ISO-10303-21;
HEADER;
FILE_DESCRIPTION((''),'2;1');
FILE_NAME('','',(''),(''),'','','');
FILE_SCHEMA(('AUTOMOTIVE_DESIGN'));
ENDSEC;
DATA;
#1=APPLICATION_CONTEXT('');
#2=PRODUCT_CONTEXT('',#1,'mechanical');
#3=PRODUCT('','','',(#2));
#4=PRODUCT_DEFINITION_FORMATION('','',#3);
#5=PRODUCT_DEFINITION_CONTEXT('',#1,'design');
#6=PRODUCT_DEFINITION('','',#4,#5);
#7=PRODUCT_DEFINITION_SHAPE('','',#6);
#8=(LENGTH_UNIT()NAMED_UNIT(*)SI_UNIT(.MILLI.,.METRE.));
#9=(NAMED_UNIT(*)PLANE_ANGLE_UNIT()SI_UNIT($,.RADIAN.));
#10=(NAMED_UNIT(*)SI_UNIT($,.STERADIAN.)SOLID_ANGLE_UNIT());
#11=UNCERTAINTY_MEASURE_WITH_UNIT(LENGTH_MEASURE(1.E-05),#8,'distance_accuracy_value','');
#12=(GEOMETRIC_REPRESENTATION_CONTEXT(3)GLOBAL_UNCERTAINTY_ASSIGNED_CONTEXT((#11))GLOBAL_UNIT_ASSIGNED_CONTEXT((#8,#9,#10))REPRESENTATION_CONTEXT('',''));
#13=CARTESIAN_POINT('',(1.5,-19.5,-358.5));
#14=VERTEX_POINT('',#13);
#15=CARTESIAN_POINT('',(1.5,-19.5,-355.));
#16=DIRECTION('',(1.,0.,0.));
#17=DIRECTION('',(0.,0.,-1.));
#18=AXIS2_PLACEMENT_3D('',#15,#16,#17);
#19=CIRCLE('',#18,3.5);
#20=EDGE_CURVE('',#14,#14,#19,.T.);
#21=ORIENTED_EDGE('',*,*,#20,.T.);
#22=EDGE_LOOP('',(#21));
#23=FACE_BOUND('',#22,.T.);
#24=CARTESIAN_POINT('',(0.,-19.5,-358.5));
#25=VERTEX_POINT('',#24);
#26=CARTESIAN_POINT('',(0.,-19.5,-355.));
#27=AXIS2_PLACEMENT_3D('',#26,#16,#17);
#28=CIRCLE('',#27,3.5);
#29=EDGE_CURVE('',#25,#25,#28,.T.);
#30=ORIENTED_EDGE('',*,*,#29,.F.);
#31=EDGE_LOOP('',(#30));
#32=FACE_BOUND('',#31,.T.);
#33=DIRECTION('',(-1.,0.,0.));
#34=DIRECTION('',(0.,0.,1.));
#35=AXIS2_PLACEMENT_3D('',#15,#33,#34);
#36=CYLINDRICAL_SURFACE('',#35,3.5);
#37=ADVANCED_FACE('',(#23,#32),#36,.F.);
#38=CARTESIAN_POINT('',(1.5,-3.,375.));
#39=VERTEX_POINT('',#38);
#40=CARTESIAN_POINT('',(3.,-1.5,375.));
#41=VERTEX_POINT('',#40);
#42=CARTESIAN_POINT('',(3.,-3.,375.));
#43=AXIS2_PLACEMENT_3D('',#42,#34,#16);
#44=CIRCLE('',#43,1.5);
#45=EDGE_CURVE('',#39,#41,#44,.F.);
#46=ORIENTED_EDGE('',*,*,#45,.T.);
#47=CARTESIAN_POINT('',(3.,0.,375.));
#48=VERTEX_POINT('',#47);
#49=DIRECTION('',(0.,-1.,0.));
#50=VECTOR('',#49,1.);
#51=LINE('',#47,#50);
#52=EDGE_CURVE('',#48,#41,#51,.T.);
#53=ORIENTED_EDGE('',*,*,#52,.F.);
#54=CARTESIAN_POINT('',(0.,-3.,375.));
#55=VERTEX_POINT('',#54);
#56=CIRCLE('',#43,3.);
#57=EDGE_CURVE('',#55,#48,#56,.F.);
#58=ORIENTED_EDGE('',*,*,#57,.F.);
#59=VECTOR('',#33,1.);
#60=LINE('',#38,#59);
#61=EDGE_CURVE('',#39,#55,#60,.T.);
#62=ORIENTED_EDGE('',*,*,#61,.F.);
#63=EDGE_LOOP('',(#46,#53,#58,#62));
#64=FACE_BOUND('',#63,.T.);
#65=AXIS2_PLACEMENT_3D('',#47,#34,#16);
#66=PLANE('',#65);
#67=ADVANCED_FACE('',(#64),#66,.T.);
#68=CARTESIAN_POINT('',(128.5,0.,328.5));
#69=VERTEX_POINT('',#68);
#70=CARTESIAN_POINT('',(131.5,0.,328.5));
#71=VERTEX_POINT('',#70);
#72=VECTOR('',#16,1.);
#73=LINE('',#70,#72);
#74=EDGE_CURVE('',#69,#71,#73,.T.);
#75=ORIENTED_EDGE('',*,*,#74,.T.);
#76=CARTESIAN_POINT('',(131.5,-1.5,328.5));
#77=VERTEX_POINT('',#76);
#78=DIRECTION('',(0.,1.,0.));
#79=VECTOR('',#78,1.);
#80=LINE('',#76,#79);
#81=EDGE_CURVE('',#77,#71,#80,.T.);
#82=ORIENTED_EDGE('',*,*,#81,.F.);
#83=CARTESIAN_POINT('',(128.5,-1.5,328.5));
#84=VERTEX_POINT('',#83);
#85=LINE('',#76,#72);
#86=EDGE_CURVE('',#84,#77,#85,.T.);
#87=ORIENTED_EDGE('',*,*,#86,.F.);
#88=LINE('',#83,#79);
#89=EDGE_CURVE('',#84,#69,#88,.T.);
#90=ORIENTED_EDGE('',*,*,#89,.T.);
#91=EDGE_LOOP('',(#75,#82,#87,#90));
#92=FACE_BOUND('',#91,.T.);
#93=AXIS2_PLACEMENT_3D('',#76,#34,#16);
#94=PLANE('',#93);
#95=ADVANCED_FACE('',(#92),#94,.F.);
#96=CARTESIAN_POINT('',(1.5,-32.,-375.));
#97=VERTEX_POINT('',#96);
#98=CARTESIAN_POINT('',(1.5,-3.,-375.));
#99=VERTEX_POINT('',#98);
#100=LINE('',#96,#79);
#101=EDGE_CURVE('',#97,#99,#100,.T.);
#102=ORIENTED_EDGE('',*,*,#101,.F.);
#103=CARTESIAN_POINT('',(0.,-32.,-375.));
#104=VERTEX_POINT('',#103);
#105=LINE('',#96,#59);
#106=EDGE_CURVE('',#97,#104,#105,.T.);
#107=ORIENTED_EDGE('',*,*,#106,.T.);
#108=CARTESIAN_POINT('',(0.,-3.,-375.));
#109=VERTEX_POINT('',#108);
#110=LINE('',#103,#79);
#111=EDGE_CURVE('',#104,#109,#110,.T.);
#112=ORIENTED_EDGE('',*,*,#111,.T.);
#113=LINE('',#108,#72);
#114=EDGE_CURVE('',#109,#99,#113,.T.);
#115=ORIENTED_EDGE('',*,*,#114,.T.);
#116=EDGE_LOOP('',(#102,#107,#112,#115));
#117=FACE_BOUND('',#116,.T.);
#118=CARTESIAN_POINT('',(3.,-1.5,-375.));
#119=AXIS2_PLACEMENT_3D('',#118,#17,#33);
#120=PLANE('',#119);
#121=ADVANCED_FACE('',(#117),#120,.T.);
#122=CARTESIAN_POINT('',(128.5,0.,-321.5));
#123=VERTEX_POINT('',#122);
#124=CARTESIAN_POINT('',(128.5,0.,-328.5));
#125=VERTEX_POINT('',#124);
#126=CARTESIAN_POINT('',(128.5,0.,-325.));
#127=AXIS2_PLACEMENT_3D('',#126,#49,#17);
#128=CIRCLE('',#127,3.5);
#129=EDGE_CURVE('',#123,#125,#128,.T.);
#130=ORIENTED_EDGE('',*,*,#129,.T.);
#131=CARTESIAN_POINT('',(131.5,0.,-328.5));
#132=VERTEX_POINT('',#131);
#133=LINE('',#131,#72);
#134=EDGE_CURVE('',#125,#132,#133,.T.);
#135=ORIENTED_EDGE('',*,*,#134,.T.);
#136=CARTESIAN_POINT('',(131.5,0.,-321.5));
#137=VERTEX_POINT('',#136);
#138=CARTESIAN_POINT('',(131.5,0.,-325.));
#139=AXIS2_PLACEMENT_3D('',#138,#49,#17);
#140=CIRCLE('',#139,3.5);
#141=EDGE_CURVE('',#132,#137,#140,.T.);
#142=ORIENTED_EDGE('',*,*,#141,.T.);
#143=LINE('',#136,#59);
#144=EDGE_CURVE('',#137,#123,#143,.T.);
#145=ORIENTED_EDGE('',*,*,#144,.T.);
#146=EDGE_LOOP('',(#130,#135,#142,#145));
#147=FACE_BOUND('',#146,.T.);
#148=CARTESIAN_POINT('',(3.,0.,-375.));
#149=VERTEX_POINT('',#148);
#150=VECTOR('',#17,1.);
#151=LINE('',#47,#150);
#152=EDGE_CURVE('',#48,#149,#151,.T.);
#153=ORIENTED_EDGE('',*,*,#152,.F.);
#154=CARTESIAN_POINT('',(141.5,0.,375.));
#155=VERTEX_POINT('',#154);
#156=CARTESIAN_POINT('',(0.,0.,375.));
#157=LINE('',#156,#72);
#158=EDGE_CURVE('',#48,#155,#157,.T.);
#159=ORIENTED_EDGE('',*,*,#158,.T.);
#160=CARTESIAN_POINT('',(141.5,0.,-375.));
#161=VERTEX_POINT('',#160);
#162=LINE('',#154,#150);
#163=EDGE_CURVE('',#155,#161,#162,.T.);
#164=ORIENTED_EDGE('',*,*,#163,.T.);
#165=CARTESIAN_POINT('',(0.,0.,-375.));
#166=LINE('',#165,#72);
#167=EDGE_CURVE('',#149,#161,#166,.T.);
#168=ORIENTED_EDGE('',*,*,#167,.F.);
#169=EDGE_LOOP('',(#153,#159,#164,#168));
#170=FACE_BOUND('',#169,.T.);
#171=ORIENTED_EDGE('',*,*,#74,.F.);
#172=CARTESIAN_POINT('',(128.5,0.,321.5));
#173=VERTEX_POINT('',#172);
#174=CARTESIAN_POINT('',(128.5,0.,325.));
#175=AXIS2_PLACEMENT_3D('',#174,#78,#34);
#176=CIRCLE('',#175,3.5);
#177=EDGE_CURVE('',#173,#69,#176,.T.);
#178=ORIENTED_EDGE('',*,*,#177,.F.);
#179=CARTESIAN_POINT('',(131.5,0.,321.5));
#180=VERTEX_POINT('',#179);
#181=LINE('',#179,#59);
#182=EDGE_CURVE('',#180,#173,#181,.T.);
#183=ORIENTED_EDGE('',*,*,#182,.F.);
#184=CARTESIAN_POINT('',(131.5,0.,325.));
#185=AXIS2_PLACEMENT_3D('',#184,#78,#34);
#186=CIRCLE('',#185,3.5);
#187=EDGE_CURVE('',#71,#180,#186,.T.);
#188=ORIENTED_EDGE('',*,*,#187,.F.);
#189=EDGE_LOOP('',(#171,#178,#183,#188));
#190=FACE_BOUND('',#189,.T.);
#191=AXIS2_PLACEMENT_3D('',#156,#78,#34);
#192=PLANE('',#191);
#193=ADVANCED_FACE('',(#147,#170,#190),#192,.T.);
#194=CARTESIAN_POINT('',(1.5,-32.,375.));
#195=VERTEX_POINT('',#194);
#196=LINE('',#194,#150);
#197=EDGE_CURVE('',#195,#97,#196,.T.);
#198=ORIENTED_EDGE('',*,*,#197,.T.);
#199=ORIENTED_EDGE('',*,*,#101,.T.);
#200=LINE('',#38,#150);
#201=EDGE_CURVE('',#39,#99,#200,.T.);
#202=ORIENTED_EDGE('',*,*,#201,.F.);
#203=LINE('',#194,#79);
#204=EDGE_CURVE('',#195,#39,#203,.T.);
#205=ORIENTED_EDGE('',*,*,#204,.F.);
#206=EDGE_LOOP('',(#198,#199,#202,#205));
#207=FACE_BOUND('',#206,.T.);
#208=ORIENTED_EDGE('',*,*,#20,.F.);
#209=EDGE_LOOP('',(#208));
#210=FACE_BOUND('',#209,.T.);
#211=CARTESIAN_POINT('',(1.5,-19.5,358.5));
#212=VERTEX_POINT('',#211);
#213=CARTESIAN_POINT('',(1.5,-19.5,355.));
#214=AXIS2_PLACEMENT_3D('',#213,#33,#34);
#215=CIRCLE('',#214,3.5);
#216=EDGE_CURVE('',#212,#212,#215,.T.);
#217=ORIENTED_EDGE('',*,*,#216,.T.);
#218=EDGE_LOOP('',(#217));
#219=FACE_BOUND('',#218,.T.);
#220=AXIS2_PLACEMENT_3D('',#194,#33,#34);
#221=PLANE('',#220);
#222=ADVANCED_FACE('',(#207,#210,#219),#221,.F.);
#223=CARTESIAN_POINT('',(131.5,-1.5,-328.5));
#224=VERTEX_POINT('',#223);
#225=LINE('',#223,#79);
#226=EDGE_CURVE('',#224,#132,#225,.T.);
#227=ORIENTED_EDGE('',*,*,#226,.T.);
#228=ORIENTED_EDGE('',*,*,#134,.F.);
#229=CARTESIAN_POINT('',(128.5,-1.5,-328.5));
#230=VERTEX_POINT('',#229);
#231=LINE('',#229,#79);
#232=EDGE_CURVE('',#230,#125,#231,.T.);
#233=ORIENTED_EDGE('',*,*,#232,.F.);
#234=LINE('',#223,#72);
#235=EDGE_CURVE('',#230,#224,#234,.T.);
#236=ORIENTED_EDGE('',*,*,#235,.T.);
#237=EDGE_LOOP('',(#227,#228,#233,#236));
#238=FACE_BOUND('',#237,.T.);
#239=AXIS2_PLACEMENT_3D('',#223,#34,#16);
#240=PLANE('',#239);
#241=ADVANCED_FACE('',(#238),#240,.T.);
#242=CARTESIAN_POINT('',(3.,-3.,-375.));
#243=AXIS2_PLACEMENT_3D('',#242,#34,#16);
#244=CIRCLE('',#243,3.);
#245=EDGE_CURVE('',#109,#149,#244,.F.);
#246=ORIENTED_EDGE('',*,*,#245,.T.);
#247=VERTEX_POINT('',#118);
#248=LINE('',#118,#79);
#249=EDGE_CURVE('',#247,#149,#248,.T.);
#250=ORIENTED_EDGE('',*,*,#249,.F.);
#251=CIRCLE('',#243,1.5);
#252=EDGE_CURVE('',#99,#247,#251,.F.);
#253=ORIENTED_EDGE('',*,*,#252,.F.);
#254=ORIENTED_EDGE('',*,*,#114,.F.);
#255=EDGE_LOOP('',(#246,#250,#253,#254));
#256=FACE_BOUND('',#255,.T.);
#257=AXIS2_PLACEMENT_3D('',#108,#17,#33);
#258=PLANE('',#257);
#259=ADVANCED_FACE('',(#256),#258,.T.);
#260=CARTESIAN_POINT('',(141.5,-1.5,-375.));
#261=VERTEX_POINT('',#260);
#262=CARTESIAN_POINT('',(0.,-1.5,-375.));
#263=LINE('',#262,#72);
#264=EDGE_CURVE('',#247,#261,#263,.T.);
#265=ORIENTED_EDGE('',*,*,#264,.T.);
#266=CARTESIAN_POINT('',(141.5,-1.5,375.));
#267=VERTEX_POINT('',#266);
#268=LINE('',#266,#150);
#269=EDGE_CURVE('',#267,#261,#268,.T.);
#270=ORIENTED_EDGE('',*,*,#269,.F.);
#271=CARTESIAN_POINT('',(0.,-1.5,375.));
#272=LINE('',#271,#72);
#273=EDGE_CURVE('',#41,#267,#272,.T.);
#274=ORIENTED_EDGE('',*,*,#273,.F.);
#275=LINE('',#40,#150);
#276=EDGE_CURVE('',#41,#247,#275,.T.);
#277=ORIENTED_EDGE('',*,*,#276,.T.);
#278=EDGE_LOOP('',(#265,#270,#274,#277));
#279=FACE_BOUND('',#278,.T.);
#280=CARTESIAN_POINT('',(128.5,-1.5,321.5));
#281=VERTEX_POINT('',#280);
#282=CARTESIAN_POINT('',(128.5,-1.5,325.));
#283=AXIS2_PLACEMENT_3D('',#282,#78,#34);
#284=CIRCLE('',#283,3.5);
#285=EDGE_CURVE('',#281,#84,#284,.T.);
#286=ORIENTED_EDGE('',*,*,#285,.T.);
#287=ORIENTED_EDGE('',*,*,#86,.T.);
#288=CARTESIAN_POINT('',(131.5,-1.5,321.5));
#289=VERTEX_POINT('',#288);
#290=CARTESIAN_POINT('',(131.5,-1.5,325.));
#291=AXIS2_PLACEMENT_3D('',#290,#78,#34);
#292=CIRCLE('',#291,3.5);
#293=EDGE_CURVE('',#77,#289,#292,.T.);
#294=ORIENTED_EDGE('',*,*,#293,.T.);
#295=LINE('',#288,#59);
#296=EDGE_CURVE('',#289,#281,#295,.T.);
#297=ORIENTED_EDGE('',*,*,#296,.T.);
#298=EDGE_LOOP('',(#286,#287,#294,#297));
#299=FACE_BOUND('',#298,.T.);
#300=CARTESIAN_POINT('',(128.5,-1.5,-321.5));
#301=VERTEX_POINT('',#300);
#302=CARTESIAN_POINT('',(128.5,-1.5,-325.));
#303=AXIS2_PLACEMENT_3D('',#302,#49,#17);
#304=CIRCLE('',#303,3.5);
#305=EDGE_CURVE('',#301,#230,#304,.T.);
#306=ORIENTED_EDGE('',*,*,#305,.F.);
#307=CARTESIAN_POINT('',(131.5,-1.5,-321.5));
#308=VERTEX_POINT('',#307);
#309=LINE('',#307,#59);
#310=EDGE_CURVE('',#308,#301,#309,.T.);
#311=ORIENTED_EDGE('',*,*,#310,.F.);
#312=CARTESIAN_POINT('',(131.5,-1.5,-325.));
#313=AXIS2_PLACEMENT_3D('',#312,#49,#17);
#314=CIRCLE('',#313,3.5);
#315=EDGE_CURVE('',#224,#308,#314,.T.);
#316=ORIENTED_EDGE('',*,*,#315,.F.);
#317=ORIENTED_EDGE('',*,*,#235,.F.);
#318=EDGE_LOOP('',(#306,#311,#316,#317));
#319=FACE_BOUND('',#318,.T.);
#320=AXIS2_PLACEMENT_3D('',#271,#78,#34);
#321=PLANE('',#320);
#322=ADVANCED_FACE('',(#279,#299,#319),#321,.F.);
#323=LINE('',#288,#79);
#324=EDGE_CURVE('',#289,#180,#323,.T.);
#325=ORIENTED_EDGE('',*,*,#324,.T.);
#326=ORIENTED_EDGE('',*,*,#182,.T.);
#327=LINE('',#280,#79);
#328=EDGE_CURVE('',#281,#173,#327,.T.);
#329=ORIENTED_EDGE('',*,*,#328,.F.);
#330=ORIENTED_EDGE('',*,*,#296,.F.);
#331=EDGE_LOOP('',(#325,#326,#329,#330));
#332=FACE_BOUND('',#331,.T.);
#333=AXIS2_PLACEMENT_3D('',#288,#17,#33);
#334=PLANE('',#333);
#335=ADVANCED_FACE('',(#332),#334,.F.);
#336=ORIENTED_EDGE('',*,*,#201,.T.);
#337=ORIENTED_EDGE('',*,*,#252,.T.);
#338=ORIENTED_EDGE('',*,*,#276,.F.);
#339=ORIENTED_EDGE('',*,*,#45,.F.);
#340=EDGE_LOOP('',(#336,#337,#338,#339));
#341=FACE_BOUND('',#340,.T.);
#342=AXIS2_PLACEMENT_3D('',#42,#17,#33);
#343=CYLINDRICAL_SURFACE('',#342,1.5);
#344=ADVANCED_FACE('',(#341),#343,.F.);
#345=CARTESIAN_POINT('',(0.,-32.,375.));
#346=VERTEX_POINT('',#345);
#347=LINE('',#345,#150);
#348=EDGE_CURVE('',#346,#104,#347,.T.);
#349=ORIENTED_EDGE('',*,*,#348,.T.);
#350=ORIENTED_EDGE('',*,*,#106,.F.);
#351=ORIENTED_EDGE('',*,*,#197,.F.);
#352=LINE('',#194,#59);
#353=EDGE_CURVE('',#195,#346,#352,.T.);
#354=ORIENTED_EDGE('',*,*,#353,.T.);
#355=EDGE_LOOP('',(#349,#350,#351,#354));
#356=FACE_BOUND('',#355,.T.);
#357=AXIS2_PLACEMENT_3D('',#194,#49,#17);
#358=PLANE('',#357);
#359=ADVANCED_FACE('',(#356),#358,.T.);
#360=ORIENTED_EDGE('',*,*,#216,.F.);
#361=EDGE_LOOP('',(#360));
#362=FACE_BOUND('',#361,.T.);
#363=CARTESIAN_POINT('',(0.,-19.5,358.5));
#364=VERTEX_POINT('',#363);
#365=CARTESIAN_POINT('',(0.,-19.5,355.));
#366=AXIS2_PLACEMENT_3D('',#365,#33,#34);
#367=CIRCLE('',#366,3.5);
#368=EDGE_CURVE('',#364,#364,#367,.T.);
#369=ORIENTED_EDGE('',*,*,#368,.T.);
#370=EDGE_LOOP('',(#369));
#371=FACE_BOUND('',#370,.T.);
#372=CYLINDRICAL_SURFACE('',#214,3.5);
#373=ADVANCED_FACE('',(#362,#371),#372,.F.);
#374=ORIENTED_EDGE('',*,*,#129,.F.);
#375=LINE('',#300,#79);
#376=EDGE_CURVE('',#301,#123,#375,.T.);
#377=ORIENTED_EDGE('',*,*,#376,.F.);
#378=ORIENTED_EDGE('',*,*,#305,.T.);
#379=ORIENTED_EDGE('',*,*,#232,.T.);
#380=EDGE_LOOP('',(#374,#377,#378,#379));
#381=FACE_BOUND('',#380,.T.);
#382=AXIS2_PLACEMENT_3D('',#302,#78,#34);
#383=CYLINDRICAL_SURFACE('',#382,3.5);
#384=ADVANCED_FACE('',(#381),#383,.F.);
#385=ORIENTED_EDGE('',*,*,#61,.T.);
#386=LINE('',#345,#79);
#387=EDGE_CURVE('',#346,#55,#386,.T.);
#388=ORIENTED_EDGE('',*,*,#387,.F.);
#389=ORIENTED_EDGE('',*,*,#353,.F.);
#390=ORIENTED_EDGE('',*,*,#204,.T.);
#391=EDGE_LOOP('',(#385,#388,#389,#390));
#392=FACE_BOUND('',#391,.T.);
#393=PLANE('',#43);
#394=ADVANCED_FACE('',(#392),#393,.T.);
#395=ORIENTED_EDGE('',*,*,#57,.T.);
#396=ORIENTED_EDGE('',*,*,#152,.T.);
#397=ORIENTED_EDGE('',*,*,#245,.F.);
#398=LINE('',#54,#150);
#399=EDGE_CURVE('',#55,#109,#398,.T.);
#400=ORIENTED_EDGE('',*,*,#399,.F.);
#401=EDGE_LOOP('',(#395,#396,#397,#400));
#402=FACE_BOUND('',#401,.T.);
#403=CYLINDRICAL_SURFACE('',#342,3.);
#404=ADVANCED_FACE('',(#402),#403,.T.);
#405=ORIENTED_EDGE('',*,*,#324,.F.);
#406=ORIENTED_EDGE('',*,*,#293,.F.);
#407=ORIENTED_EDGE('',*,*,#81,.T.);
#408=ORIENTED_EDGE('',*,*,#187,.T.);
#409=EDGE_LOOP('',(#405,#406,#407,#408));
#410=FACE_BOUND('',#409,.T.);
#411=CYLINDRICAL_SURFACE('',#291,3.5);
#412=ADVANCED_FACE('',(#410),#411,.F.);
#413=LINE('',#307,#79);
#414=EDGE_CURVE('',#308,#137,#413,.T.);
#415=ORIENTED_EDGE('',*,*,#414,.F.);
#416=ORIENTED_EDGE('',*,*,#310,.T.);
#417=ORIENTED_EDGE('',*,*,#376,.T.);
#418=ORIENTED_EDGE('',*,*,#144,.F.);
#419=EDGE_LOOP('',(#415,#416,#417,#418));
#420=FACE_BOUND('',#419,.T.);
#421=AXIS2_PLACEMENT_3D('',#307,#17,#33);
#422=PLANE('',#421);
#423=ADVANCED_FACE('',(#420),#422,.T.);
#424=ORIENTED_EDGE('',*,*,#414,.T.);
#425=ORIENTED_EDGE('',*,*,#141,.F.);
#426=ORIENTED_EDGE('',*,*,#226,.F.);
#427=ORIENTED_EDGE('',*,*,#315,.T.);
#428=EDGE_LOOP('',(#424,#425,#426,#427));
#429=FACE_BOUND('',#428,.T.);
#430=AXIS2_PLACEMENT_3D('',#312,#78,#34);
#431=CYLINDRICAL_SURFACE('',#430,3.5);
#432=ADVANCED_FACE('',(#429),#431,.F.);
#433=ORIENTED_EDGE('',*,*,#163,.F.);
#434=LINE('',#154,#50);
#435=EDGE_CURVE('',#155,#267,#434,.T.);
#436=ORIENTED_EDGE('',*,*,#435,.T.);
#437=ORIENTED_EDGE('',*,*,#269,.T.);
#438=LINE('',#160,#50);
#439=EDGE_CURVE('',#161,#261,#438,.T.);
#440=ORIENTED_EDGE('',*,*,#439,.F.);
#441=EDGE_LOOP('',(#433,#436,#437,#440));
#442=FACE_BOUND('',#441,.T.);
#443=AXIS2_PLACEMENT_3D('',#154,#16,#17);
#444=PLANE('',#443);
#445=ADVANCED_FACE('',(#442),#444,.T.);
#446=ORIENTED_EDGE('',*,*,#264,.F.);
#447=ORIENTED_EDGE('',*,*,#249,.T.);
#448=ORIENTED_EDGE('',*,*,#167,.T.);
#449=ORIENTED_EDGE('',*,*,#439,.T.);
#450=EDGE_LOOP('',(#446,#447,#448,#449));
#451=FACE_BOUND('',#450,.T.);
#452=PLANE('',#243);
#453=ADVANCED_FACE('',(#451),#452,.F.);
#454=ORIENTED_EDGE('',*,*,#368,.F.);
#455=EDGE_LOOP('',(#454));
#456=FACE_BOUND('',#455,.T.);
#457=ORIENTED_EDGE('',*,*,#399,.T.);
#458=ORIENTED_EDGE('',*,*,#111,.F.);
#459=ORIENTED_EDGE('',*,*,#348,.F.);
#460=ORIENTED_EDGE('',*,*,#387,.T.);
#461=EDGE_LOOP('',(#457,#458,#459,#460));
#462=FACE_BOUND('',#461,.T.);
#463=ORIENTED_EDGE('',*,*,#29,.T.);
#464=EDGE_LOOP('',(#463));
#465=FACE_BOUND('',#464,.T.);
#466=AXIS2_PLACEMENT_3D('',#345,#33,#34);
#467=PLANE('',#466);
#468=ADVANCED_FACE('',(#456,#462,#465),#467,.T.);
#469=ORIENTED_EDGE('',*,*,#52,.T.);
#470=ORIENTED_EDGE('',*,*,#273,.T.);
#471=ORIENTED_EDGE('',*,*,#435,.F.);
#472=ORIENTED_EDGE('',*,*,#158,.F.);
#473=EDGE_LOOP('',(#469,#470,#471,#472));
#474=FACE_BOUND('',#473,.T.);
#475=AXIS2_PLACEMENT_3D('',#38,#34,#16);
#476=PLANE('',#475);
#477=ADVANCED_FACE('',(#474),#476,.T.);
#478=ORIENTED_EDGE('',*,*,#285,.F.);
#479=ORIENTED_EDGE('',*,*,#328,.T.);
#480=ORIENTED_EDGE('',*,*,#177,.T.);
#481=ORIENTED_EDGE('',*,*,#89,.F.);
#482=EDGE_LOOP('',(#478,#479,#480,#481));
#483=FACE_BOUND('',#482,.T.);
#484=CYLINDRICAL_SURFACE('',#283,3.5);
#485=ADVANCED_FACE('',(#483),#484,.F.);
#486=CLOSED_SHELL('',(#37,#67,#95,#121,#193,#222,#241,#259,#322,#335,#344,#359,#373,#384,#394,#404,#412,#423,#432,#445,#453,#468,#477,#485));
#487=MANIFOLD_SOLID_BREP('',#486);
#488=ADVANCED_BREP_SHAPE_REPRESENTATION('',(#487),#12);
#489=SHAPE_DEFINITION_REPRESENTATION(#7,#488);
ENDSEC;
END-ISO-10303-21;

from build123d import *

# Parameters (mm, degrees)
SM_BASE_FLANGE_1_DEPTH = 375
SKETCH_7_R             = 3.5
CUT_EXTRUDE_1_DEPTH    = 10
CUT_EXTRUDE_2_DEPTH    = 10


# Sheet-metal steps are written as plain solids
with BuildPart() as part:
    # Sketch 1 → Базовая кромка1 (new, symmetric)
    with BuildSketch(Plane.XY):
        with BuildLine():
            Line((0, -32), (0, -3))
            ThreePointArc((0, -3), (0.878679656, -0.878679656), (3, 0))
            Line((3, 0), (141.5, 0))
            Line((141.5, 0), (141.5, -1.5))
            Line((141.5, -1.5), (3, -1.5))
            ThreePointArc((3, -1.5), (1.939339828, -1.939339828), (1.5, -3))
            Line((1.5, -3), (1.5, -32))
            Line((1.5, -32), (0, -32))
        make_face()
    extrude(amount=SM_BASE_FLANGE_1_DEPTH, both=True)

    # Эскиз7 → Вырез-Вытянуть1 (cut)
    with BuildSketch(Plane.ZY):
        with Locations((355, -19.5)):
            Circle(SKETCH_7_R)
    cut_extrude_1 = extrude(amount=-CUT_EXTRUDE_1_DEPTH, mode=Mode.SUBTRACT)

    # Эскиз8 → Вырез-Вытянуть2 (cut)
    with BuildSketch(Plane(origin=(0, 0, 0), x_dir=(1, 0, 0), z_dir=(0, 1, 0))):
        with BuildLine():
            Line((131.5, -328.5), (128.5, -328.5))
            ThreePointArc((128.5, -328.5), (125, -325), (128.5, -321.5))
            Line((128.5, -321.5), (131.5, -321.5))
            ThreePointArc((131.5, -321.5), (135, -325), (131.5, -328.5))
        make_face()
    cut_extrude_2 = extrude(amount=-CUT_EXTRUDE_2_DEPTH, mode=Mode.SUBTRACT)

    # Зеркальное отражение1: Вырез-Вытянуть1, Вырез-Вытянуть2 across plane
    add(cut_extrude_1.mirror(Plane.XY), mode=Mode.SUBTRACT)
    add(cut_extrude_2.mirror(Plane.XY), mode=Mode.SUBTRACT)


solid = part.part
